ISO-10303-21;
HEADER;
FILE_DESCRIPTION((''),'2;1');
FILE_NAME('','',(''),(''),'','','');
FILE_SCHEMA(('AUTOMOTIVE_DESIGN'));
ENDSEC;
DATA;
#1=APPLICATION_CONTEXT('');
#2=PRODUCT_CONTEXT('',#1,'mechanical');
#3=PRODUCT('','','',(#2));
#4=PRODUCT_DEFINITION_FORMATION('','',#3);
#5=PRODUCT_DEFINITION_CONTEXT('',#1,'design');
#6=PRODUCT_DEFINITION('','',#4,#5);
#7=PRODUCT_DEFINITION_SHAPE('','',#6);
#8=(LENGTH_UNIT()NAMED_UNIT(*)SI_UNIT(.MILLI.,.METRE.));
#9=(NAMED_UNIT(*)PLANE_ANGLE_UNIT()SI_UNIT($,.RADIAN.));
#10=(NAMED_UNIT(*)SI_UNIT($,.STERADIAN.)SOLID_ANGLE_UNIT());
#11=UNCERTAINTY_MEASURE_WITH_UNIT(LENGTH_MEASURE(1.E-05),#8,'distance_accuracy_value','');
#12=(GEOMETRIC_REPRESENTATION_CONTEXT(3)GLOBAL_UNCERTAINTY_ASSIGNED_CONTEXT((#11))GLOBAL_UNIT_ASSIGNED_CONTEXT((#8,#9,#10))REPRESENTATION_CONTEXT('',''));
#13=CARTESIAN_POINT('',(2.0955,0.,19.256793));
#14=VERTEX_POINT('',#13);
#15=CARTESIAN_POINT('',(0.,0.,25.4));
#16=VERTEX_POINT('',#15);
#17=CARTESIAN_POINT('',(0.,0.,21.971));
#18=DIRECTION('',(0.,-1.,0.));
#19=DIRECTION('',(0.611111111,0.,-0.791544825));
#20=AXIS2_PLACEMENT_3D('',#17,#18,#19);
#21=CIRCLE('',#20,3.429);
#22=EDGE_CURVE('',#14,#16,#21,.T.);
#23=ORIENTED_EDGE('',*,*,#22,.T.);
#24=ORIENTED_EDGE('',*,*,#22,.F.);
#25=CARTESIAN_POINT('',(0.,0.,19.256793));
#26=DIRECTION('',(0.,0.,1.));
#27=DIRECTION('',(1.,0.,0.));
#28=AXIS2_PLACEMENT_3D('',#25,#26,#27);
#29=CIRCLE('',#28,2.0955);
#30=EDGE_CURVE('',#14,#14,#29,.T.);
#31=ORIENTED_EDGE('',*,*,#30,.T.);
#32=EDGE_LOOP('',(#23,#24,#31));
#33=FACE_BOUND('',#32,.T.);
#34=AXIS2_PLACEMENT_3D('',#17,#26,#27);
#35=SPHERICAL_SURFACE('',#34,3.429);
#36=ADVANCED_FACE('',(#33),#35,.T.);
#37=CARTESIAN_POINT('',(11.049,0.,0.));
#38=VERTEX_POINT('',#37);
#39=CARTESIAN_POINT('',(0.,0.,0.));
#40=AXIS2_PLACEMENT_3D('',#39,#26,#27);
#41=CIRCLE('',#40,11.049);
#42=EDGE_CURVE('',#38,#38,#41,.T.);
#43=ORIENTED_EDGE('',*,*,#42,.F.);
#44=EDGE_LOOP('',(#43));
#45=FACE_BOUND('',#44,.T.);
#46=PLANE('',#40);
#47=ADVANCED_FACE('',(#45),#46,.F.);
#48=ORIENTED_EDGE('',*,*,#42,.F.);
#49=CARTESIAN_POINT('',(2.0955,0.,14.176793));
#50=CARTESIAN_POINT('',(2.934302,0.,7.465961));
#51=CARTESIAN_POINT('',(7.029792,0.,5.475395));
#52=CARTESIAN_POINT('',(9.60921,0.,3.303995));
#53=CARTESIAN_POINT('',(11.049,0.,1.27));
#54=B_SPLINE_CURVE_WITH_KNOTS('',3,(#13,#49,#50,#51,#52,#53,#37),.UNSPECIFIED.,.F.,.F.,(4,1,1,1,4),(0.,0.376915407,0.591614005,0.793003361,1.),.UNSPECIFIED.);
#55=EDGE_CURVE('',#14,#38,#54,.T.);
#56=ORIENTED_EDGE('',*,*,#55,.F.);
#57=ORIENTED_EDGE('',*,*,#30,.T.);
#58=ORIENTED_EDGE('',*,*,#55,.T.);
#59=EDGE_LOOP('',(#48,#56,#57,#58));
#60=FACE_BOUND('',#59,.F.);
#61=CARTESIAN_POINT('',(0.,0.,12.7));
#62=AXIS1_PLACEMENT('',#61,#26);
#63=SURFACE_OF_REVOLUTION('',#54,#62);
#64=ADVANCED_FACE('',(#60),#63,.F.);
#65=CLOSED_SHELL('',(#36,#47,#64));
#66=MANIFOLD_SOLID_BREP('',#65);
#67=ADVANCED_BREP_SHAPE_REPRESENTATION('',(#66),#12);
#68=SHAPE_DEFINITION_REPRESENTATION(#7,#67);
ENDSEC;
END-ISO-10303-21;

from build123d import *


with BuildPart() as f1:
    # F0 (on Front) → F1 (revolve)
    with BuildSketch(Plane.XZ):
        with BuildLine():
            add(Edge.make_bspline(
                [(2.0955, 19.2567927953), (2.0955, 14.1767927953), (2.9343024721, 7.4659610748), (7.0297915521, 5.4753950855), (9.6092095913, 3.303995323), (11.049, 1.27), (11.049, 0)],
                knots=[0, 0, 0, 0, 0.3769154067, 0.5916140053, 0.7930033614, 1, 1, 1, 1], degree=3))
            ThreePointArc((2.0955, 19.2567927953), (3.2453857633, 23.0780285667), (0, 25.4))
            Line((0, 25.4), (0, 0))
            Line((0, 0), (11.049, 0))
        make_face()
    revolve(axis=Axis((0, 0, 12.7), (0, 0, 1)))


solid = f1.part
